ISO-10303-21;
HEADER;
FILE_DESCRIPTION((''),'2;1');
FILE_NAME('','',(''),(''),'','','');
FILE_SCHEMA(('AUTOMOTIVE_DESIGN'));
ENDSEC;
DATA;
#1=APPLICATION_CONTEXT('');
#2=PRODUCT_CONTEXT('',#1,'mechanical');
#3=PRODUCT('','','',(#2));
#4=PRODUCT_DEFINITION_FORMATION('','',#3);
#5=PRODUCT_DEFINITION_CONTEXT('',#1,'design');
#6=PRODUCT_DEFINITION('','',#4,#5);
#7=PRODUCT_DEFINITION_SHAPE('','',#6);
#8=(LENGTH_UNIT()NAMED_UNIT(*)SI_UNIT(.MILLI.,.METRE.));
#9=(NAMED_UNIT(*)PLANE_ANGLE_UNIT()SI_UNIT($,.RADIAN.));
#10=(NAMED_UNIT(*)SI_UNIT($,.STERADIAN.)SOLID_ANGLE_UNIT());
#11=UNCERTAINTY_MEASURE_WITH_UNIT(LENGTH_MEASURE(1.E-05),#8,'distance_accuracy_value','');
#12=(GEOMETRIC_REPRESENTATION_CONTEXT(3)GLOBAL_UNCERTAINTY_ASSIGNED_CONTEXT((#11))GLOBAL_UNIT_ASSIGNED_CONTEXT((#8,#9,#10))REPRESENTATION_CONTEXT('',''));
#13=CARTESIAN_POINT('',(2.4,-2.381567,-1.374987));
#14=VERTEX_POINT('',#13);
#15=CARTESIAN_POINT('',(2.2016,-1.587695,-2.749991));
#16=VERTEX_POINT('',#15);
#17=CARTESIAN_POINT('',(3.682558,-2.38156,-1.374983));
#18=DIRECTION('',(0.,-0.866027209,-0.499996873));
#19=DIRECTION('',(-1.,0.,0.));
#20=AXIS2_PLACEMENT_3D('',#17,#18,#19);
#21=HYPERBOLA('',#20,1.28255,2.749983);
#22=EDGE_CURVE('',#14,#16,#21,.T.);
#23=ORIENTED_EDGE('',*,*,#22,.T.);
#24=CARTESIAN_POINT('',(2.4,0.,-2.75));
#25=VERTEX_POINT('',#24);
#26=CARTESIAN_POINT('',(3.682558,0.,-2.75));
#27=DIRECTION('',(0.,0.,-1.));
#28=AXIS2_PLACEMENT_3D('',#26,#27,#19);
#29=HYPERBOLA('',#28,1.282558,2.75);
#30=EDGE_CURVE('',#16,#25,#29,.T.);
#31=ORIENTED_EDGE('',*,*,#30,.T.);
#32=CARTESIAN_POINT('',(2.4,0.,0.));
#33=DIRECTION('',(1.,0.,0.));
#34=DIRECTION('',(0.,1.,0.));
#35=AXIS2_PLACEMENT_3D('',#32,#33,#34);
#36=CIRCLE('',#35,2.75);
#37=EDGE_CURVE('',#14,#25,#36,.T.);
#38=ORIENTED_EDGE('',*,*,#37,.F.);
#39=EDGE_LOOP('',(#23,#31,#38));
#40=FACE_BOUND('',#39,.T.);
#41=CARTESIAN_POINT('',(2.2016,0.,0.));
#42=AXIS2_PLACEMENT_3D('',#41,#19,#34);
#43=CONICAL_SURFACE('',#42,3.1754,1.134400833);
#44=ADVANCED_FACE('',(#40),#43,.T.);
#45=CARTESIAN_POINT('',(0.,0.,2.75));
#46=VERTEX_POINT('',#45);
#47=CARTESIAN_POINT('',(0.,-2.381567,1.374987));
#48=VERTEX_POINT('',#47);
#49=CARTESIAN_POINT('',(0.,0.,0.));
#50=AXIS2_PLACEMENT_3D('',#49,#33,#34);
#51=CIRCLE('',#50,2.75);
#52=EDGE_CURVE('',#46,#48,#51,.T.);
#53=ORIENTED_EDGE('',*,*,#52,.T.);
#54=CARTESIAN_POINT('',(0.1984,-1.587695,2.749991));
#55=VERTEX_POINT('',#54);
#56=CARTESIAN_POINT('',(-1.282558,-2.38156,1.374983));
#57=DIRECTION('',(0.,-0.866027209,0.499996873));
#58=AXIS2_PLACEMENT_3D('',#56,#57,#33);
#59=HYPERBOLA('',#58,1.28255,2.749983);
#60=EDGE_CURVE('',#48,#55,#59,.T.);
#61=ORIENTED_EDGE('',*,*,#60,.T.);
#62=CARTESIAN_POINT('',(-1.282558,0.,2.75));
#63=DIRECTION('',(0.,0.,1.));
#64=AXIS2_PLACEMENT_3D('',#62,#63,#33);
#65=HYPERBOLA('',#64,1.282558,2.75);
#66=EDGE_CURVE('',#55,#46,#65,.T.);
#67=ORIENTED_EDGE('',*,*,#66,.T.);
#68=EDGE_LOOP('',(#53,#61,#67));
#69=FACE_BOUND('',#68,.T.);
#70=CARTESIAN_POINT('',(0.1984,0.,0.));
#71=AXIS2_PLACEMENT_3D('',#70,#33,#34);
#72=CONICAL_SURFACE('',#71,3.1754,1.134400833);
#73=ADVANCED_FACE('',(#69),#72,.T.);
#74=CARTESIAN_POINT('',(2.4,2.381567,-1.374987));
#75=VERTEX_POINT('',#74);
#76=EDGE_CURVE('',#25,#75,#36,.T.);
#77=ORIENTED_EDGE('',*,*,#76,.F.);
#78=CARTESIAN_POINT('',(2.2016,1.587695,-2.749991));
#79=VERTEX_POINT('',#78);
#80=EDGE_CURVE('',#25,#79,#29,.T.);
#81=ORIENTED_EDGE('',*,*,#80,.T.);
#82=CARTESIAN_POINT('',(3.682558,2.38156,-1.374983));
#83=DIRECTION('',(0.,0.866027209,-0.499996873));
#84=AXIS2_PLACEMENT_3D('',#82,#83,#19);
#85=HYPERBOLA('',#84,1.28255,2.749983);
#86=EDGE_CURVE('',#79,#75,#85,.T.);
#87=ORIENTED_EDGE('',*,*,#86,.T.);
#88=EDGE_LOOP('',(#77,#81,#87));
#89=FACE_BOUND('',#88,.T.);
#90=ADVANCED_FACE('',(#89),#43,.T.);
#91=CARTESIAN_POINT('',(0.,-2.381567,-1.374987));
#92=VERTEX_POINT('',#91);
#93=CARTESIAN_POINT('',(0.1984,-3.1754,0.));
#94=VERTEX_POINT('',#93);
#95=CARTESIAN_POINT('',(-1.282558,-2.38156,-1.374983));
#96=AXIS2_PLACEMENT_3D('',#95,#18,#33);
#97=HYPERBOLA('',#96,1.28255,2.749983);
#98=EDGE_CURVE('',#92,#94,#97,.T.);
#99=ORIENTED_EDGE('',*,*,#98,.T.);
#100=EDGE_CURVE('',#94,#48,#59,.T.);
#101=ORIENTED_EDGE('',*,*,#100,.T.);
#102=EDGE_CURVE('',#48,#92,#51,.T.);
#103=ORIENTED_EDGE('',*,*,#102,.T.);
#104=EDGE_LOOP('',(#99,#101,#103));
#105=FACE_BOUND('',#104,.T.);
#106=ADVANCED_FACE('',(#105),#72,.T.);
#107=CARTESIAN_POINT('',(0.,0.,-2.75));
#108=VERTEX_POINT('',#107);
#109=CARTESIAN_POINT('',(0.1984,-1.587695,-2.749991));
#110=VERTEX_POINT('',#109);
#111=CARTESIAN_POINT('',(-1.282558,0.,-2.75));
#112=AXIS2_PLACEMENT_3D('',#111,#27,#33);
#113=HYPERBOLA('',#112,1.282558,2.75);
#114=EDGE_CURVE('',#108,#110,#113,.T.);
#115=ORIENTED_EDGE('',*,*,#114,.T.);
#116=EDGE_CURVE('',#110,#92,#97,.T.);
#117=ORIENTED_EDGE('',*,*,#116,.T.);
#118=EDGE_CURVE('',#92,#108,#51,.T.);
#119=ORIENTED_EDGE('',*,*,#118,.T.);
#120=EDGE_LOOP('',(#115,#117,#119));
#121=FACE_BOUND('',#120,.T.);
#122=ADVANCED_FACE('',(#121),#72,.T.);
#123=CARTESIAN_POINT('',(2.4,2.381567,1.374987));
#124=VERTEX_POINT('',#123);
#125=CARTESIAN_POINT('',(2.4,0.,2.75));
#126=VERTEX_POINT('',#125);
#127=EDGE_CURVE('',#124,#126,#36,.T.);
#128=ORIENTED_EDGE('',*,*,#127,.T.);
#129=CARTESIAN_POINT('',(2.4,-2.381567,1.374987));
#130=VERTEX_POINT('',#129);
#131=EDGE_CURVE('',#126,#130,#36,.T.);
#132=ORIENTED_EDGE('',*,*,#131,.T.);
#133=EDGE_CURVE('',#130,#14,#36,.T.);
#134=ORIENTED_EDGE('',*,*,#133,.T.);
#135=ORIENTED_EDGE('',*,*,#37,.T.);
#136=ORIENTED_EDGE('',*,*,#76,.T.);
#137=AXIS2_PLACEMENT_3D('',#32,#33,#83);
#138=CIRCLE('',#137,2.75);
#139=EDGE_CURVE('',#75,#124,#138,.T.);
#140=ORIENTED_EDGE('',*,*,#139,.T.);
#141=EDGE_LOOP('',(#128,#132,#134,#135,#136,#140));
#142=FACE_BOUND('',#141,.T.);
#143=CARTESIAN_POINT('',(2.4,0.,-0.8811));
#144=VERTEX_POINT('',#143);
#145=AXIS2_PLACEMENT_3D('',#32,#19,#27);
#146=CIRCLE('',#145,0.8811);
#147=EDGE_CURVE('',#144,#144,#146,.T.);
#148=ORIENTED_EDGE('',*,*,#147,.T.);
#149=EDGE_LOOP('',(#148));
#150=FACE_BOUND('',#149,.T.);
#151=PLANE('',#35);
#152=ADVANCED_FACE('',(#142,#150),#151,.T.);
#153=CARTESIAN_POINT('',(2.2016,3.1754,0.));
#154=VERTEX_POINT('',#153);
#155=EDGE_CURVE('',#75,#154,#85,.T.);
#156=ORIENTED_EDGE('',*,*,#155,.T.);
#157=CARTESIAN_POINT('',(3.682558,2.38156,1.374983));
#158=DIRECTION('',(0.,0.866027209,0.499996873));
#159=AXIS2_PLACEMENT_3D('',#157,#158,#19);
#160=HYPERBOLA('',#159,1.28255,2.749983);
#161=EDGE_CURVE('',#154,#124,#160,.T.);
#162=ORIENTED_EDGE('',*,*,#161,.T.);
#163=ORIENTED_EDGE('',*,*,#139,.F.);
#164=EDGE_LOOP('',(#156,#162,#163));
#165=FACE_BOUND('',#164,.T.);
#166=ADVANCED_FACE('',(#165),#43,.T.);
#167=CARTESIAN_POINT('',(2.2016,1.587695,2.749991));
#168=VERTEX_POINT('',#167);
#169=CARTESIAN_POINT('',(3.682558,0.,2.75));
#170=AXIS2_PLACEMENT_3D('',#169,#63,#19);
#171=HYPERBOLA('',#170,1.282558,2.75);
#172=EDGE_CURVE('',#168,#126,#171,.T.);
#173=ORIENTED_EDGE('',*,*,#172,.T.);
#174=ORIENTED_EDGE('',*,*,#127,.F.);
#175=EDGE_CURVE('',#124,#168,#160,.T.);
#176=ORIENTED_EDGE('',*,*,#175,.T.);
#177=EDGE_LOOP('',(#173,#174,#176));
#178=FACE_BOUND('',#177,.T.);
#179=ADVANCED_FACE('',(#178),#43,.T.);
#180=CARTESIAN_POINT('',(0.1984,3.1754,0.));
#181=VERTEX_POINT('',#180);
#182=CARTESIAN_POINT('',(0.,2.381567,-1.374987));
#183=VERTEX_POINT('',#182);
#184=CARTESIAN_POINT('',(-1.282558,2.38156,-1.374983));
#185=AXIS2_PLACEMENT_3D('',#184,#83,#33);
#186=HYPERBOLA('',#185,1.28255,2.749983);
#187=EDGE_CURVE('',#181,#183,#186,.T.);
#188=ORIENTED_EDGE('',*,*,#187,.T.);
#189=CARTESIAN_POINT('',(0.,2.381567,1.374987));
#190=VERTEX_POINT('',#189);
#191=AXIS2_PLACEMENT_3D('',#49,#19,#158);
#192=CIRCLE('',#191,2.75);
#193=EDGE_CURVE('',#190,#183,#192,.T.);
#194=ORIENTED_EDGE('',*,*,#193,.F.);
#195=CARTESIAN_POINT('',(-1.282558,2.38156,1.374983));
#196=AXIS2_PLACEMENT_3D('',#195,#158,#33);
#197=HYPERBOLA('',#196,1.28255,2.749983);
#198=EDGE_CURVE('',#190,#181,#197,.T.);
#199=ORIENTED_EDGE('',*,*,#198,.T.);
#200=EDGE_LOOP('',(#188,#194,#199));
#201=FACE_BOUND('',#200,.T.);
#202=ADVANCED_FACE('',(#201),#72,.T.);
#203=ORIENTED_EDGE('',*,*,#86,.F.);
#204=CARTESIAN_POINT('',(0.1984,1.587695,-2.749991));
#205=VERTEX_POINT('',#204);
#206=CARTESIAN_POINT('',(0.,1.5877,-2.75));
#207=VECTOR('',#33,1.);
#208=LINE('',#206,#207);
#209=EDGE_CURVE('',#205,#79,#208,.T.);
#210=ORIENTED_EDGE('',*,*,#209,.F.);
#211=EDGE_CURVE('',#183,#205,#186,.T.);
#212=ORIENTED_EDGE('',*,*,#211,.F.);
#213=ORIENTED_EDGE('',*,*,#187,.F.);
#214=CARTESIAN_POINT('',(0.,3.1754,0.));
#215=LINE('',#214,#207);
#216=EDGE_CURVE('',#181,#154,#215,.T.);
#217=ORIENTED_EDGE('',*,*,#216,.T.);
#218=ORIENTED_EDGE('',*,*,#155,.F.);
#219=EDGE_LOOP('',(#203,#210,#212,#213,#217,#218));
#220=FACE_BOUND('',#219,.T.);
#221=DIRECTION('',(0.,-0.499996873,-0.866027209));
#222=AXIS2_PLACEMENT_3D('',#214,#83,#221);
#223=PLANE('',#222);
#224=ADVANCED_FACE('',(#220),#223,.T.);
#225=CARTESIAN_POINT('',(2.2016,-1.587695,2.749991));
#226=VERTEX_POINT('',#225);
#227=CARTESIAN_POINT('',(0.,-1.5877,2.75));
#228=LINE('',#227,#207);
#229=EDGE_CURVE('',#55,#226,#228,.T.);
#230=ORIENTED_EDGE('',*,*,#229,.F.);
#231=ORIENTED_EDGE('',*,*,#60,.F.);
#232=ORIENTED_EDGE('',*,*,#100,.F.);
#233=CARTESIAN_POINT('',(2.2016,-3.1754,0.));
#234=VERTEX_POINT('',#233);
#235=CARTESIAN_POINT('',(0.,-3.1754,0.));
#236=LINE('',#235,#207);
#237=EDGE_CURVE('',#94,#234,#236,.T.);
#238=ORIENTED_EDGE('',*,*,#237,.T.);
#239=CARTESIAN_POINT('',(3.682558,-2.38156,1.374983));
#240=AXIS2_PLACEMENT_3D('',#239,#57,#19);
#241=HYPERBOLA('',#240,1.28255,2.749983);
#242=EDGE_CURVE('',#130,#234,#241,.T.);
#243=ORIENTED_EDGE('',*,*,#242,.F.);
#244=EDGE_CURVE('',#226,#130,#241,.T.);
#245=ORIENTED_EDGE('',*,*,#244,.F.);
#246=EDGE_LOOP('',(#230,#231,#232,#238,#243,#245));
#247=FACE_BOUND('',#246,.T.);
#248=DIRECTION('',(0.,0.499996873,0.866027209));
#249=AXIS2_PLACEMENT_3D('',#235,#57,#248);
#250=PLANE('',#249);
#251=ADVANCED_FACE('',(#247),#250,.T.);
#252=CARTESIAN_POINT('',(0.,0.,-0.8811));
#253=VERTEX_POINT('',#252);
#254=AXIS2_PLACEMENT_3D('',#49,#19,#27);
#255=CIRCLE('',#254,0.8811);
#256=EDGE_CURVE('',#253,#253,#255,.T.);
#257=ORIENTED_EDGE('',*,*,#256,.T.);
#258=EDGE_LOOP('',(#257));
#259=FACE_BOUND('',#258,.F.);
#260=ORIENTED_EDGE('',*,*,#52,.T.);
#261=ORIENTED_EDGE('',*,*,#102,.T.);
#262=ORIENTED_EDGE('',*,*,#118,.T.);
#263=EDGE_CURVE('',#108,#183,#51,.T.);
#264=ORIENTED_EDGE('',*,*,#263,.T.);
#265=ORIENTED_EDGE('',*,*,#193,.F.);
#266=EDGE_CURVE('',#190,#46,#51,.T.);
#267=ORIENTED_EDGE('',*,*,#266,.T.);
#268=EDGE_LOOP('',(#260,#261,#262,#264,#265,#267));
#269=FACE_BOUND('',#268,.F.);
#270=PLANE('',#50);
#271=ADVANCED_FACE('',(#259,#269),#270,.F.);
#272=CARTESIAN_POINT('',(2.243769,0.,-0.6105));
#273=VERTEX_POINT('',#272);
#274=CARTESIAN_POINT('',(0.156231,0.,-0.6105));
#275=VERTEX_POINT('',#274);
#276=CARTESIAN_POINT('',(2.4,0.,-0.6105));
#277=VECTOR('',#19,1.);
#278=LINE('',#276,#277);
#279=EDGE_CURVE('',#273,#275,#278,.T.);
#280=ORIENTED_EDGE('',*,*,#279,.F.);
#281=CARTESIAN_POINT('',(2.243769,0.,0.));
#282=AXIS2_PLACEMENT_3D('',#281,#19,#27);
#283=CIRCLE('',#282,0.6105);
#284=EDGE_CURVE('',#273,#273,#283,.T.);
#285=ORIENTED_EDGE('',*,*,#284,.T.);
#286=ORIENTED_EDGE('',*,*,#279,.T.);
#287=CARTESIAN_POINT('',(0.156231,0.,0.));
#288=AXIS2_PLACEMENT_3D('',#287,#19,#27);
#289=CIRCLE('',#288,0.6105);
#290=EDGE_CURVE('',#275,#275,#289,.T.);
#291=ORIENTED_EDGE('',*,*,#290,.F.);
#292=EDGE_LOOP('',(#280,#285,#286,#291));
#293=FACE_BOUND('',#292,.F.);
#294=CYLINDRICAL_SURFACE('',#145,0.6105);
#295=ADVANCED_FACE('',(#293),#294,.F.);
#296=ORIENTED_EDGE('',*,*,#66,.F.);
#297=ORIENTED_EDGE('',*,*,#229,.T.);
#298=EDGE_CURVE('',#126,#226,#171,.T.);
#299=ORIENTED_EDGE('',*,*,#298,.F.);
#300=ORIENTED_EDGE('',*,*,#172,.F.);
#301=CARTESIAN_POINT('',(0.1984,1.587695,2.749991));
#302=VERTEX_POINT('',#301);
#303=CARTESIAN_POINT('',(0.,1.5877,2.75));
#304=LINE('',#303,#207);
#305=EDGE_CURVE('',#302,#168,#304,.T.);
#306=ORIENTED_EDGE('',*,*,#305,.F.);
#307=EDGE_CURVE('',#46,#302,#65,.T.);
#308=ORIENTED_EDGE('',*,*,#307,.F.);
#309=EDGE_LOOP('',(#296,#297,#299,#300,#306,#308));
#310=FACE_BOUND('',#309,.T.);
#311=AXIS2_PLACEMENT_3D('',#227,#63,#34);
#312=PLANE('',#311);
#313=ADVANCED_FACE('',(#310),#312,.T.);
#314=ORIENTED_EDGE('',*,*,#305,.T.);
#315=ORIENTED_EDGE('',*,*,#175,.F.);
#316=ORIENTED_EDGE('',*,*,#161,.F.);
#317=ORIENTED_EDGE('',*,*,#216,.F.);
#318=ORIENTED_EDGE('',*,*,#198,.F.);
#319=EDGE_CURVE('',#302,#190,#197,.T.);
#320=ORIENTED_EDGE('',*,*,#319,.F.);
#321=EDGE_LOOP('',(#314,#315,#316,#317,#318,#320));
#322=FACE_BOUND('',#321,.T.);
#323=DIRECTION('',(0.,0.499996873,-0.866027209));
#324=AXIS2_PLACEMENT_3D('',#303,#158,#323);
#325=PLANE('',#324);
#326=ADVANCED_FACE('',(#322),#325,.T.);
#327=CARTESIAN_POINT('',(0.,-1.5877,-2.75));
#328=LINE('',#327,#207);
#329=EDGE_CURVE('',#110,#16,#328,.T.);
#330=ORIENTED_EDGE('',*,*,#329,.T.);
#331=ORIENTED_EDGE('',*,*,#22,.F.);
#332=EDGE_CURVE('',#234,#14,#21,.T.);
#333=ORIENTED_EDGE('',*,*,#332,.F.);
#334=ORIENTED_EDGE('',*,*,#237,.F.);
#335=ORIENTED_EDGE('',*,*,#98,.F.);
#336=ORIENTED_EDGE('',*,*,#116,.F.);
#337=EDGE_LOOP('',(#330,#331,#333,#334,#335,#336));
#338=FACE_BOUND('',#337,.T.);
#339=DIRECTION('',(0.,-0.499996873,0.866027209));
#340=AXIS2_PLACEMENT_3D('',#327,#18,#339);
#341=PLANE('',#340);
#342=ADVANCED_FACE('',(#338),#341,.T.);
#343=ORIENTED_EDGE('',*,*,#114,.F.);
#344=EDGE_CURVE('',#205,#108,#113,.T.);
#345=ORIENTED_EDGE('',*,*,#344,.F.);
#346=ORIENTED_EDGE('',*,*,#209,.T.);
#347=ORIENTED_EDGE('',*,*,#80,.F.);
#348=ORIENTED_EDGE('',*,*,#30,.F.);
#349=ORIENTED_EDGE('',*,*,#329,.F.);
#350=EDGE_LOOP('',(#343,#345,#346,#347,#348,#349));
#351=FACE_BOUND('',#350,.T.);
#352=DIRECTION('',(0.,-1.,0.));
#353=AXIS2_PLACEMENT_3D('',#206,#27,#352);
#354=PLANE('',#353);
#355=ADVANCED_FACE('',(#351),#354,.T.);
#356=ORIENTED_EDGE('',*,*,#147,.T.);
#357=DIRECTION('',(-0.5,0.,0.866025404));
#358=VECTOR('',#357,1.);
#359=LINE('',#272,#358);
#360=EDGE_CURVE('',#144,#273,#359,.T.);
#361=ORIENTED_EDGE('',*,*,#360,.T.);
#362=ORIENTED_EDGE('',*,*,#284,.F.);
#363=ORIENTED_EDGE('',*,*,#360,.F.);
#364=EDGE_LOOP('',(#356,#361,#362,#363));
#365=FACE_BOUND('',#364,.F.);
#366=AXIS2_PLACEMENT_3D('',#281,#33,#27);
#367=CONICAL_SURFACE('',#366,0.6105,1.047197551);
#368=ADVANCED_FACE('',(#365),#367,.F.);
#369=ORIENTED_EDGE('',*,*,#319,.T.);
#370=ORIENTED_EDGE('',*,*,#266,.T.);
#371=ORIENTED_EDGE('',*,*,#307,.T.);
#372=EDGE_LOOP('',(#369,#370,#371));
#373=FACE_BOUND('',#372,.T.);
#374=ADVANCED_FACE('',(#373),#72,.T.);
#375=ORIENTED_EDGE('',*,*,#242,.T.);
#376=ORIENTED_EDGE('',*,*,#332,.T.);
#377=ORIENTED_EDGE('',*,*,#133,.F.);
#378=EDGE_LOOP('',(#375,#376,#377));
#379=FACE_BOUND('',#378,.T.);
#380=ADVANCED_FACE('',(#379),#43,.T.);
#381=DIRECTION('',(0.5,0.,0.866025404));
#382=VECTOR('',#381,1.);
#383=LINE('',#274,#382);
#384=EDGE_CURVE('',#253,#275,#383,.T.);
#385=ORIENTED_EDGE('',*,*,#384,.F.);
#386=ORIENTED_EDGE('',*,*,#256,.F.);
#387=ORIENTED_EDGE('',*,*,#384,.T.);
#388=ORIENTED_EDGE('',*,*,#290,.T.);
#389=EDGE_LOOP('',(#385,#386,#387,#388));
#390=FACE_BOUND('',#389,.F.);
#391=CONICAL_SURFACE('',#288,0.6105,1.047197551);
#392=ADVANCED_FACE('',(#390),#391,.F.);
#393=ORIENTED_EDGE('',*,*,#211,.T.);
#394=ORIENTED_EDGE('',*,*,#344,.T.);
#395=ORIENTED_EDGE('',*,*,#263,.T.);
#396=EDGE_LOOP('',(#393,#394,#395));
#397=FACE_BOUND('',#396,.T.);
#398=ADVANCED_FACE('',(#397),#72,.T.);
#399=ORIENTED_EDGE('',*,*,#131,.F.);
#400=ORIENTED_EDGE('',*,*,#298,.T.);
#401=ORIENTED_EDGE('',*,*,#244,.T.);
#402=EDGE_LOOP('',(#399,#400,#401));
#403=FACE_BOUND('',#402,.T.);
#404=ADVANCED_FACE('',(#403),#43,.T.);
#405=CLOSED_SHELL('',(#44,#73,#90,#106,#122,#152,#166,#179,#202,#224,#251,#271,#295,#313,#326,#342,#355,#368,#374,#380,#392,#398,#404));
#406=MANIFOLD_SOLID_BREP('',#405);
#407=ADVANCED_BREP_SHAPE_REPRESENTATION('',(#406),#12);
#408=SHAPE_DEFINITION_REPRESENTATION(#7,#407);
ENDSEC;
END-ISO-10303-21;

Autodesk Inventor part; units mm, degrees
ref_plane "YZ Plane" through (0, 0, 0) normal (1, 0, 0) x (0, 1, 0)
ref_plane "XZ Plane" through (0, 0, 0) normal (0, 1, 0) x (-1, 0, 0)
sketch "Sketch1" plane through (0, 0, 0) normal (1, 0, 0) x (0, 1, 0)
  line L0 (-3.1754, 0) -> (-1.5877, 2.75)
  line L1 (-1.5877, 2.75) -> (1.5877, 2.75)
  line L2 (1.5877, 2.75) -> (3.1754, 0)
  line L3 (3.1754, 0) -> (1.5877, -2.75)
  line L4 (1.5877, -2.75) -> (-1.5877, -2.75)
  line L5 (-1.5877, -2.75) -> (-3.1754, 0)
  point P0 (0, 0)
  point P1 (0, 0)
  dimension "d0" = 6.3509
extrude "Body" add sketch "Sketch1" along normal blind 2.4
sketch "Sketch2" plane through (0, 0, 0) normal (0, 0, 1) x (1, 0, 0)
  line L0 (0, 1.5877) -> (0, 3.1754) projected
  line L1 (0, 3.1754) -> (2.4, 3.1754) projected
  line L2 (2.4, 1.5877) -> (2.4, 3.1754) projected
  line L3 (-0.16, 0) -> (0.96, 0) projected
  line L4 (0.1984, 3.1754) -> (0, 2.75)
  line L5 (2.2016, 3.1754) -> (2.4, 2.75)
  dimension "d3" = 25
  dimension "d4" = 25
  dimension "d5" = 5.5
  dimension "d6" = 5.5
revolve "Chamfer1" cut sketch "Sketch2" angle 360 about axis through (-10, 0, 0) along (1, 0, 0)
sketch "Sketch3" plane through (2.4, 0, 0) normal (1, 0, 0) x (0, 0, -1)
  arc A0 (-1.375, -2.3816) -> (1.375, -2.3816) centre (0, 0) ccw projected
hole "Thread" at (2.4, 0, 0) direction (-1, 0, 0) diameter 1.221 end through all thread size "M1.6x0.35" class "6H" standard "ANSI Metric M Profile"
chamfer "Chamfer2" distance 0.2706 angle 30 1 edges at (2.4, 0, 0.6105) measured on face at (2.4, -2.0253, -0.0245)
chamfer "Chamfer3" distance 0.2706 angle 30 1 edges at (0, 0, 0.6105) measured on face at (0, -2.0253, -0.0245)
ref_plane "Work Plane1" through (-6.3375, 0, 0) normal (0, -0.8660254, -0.5) x (1, 0, 0)
equation "\"d0\" = 1.1547 * SW"
equation "\"d1\" = KOH"
equation "\"d3\" = ANG1"
equation "\"d4\" = ANG2"
equation "\"d5\" = SW0"
equation "\"d6\" = SW01"
equation "\"d8\" = -0.5 * GD1 + 0.5 * NND"
equation "\"d40\" = -0.5 * GD1 + 0.5 * NND"
equation "\"d10\" = -0.5 * GD1 + 0.5 * NND"
equation "\"d41\" = -0.5 * GD1 + 0.5 * NND"
equation "\"ANG1\" = 25deg"
equation "\"ANG2\" = 25deg"
equation "\"NND\" = 3"
equation "\"KOH\" = 2.4"
equation "\"SW\" = 5.5"
equation "\"SW0\" = SW"
equation "\"SW01\" = SW"
equation "\"GUL\" = 0.541266 * PTC"
equation "\"THREADDIA\" = 3"
equation "\"TOA\" = 30deg"
equation "\"PTC\" = 0.5"
equation "\"E0\" = 1.155 * SW"
equation "\"GAL\" = 0.541266 * PTC"
equation "\"SD2\" = 0"
equation "\"WFT\" = 0"
equation "\"GD1\" = 2.458734"
properties part number "ANSI B 18.2.4.1 M - M3 x 0.5" material "Steel, Mild"
